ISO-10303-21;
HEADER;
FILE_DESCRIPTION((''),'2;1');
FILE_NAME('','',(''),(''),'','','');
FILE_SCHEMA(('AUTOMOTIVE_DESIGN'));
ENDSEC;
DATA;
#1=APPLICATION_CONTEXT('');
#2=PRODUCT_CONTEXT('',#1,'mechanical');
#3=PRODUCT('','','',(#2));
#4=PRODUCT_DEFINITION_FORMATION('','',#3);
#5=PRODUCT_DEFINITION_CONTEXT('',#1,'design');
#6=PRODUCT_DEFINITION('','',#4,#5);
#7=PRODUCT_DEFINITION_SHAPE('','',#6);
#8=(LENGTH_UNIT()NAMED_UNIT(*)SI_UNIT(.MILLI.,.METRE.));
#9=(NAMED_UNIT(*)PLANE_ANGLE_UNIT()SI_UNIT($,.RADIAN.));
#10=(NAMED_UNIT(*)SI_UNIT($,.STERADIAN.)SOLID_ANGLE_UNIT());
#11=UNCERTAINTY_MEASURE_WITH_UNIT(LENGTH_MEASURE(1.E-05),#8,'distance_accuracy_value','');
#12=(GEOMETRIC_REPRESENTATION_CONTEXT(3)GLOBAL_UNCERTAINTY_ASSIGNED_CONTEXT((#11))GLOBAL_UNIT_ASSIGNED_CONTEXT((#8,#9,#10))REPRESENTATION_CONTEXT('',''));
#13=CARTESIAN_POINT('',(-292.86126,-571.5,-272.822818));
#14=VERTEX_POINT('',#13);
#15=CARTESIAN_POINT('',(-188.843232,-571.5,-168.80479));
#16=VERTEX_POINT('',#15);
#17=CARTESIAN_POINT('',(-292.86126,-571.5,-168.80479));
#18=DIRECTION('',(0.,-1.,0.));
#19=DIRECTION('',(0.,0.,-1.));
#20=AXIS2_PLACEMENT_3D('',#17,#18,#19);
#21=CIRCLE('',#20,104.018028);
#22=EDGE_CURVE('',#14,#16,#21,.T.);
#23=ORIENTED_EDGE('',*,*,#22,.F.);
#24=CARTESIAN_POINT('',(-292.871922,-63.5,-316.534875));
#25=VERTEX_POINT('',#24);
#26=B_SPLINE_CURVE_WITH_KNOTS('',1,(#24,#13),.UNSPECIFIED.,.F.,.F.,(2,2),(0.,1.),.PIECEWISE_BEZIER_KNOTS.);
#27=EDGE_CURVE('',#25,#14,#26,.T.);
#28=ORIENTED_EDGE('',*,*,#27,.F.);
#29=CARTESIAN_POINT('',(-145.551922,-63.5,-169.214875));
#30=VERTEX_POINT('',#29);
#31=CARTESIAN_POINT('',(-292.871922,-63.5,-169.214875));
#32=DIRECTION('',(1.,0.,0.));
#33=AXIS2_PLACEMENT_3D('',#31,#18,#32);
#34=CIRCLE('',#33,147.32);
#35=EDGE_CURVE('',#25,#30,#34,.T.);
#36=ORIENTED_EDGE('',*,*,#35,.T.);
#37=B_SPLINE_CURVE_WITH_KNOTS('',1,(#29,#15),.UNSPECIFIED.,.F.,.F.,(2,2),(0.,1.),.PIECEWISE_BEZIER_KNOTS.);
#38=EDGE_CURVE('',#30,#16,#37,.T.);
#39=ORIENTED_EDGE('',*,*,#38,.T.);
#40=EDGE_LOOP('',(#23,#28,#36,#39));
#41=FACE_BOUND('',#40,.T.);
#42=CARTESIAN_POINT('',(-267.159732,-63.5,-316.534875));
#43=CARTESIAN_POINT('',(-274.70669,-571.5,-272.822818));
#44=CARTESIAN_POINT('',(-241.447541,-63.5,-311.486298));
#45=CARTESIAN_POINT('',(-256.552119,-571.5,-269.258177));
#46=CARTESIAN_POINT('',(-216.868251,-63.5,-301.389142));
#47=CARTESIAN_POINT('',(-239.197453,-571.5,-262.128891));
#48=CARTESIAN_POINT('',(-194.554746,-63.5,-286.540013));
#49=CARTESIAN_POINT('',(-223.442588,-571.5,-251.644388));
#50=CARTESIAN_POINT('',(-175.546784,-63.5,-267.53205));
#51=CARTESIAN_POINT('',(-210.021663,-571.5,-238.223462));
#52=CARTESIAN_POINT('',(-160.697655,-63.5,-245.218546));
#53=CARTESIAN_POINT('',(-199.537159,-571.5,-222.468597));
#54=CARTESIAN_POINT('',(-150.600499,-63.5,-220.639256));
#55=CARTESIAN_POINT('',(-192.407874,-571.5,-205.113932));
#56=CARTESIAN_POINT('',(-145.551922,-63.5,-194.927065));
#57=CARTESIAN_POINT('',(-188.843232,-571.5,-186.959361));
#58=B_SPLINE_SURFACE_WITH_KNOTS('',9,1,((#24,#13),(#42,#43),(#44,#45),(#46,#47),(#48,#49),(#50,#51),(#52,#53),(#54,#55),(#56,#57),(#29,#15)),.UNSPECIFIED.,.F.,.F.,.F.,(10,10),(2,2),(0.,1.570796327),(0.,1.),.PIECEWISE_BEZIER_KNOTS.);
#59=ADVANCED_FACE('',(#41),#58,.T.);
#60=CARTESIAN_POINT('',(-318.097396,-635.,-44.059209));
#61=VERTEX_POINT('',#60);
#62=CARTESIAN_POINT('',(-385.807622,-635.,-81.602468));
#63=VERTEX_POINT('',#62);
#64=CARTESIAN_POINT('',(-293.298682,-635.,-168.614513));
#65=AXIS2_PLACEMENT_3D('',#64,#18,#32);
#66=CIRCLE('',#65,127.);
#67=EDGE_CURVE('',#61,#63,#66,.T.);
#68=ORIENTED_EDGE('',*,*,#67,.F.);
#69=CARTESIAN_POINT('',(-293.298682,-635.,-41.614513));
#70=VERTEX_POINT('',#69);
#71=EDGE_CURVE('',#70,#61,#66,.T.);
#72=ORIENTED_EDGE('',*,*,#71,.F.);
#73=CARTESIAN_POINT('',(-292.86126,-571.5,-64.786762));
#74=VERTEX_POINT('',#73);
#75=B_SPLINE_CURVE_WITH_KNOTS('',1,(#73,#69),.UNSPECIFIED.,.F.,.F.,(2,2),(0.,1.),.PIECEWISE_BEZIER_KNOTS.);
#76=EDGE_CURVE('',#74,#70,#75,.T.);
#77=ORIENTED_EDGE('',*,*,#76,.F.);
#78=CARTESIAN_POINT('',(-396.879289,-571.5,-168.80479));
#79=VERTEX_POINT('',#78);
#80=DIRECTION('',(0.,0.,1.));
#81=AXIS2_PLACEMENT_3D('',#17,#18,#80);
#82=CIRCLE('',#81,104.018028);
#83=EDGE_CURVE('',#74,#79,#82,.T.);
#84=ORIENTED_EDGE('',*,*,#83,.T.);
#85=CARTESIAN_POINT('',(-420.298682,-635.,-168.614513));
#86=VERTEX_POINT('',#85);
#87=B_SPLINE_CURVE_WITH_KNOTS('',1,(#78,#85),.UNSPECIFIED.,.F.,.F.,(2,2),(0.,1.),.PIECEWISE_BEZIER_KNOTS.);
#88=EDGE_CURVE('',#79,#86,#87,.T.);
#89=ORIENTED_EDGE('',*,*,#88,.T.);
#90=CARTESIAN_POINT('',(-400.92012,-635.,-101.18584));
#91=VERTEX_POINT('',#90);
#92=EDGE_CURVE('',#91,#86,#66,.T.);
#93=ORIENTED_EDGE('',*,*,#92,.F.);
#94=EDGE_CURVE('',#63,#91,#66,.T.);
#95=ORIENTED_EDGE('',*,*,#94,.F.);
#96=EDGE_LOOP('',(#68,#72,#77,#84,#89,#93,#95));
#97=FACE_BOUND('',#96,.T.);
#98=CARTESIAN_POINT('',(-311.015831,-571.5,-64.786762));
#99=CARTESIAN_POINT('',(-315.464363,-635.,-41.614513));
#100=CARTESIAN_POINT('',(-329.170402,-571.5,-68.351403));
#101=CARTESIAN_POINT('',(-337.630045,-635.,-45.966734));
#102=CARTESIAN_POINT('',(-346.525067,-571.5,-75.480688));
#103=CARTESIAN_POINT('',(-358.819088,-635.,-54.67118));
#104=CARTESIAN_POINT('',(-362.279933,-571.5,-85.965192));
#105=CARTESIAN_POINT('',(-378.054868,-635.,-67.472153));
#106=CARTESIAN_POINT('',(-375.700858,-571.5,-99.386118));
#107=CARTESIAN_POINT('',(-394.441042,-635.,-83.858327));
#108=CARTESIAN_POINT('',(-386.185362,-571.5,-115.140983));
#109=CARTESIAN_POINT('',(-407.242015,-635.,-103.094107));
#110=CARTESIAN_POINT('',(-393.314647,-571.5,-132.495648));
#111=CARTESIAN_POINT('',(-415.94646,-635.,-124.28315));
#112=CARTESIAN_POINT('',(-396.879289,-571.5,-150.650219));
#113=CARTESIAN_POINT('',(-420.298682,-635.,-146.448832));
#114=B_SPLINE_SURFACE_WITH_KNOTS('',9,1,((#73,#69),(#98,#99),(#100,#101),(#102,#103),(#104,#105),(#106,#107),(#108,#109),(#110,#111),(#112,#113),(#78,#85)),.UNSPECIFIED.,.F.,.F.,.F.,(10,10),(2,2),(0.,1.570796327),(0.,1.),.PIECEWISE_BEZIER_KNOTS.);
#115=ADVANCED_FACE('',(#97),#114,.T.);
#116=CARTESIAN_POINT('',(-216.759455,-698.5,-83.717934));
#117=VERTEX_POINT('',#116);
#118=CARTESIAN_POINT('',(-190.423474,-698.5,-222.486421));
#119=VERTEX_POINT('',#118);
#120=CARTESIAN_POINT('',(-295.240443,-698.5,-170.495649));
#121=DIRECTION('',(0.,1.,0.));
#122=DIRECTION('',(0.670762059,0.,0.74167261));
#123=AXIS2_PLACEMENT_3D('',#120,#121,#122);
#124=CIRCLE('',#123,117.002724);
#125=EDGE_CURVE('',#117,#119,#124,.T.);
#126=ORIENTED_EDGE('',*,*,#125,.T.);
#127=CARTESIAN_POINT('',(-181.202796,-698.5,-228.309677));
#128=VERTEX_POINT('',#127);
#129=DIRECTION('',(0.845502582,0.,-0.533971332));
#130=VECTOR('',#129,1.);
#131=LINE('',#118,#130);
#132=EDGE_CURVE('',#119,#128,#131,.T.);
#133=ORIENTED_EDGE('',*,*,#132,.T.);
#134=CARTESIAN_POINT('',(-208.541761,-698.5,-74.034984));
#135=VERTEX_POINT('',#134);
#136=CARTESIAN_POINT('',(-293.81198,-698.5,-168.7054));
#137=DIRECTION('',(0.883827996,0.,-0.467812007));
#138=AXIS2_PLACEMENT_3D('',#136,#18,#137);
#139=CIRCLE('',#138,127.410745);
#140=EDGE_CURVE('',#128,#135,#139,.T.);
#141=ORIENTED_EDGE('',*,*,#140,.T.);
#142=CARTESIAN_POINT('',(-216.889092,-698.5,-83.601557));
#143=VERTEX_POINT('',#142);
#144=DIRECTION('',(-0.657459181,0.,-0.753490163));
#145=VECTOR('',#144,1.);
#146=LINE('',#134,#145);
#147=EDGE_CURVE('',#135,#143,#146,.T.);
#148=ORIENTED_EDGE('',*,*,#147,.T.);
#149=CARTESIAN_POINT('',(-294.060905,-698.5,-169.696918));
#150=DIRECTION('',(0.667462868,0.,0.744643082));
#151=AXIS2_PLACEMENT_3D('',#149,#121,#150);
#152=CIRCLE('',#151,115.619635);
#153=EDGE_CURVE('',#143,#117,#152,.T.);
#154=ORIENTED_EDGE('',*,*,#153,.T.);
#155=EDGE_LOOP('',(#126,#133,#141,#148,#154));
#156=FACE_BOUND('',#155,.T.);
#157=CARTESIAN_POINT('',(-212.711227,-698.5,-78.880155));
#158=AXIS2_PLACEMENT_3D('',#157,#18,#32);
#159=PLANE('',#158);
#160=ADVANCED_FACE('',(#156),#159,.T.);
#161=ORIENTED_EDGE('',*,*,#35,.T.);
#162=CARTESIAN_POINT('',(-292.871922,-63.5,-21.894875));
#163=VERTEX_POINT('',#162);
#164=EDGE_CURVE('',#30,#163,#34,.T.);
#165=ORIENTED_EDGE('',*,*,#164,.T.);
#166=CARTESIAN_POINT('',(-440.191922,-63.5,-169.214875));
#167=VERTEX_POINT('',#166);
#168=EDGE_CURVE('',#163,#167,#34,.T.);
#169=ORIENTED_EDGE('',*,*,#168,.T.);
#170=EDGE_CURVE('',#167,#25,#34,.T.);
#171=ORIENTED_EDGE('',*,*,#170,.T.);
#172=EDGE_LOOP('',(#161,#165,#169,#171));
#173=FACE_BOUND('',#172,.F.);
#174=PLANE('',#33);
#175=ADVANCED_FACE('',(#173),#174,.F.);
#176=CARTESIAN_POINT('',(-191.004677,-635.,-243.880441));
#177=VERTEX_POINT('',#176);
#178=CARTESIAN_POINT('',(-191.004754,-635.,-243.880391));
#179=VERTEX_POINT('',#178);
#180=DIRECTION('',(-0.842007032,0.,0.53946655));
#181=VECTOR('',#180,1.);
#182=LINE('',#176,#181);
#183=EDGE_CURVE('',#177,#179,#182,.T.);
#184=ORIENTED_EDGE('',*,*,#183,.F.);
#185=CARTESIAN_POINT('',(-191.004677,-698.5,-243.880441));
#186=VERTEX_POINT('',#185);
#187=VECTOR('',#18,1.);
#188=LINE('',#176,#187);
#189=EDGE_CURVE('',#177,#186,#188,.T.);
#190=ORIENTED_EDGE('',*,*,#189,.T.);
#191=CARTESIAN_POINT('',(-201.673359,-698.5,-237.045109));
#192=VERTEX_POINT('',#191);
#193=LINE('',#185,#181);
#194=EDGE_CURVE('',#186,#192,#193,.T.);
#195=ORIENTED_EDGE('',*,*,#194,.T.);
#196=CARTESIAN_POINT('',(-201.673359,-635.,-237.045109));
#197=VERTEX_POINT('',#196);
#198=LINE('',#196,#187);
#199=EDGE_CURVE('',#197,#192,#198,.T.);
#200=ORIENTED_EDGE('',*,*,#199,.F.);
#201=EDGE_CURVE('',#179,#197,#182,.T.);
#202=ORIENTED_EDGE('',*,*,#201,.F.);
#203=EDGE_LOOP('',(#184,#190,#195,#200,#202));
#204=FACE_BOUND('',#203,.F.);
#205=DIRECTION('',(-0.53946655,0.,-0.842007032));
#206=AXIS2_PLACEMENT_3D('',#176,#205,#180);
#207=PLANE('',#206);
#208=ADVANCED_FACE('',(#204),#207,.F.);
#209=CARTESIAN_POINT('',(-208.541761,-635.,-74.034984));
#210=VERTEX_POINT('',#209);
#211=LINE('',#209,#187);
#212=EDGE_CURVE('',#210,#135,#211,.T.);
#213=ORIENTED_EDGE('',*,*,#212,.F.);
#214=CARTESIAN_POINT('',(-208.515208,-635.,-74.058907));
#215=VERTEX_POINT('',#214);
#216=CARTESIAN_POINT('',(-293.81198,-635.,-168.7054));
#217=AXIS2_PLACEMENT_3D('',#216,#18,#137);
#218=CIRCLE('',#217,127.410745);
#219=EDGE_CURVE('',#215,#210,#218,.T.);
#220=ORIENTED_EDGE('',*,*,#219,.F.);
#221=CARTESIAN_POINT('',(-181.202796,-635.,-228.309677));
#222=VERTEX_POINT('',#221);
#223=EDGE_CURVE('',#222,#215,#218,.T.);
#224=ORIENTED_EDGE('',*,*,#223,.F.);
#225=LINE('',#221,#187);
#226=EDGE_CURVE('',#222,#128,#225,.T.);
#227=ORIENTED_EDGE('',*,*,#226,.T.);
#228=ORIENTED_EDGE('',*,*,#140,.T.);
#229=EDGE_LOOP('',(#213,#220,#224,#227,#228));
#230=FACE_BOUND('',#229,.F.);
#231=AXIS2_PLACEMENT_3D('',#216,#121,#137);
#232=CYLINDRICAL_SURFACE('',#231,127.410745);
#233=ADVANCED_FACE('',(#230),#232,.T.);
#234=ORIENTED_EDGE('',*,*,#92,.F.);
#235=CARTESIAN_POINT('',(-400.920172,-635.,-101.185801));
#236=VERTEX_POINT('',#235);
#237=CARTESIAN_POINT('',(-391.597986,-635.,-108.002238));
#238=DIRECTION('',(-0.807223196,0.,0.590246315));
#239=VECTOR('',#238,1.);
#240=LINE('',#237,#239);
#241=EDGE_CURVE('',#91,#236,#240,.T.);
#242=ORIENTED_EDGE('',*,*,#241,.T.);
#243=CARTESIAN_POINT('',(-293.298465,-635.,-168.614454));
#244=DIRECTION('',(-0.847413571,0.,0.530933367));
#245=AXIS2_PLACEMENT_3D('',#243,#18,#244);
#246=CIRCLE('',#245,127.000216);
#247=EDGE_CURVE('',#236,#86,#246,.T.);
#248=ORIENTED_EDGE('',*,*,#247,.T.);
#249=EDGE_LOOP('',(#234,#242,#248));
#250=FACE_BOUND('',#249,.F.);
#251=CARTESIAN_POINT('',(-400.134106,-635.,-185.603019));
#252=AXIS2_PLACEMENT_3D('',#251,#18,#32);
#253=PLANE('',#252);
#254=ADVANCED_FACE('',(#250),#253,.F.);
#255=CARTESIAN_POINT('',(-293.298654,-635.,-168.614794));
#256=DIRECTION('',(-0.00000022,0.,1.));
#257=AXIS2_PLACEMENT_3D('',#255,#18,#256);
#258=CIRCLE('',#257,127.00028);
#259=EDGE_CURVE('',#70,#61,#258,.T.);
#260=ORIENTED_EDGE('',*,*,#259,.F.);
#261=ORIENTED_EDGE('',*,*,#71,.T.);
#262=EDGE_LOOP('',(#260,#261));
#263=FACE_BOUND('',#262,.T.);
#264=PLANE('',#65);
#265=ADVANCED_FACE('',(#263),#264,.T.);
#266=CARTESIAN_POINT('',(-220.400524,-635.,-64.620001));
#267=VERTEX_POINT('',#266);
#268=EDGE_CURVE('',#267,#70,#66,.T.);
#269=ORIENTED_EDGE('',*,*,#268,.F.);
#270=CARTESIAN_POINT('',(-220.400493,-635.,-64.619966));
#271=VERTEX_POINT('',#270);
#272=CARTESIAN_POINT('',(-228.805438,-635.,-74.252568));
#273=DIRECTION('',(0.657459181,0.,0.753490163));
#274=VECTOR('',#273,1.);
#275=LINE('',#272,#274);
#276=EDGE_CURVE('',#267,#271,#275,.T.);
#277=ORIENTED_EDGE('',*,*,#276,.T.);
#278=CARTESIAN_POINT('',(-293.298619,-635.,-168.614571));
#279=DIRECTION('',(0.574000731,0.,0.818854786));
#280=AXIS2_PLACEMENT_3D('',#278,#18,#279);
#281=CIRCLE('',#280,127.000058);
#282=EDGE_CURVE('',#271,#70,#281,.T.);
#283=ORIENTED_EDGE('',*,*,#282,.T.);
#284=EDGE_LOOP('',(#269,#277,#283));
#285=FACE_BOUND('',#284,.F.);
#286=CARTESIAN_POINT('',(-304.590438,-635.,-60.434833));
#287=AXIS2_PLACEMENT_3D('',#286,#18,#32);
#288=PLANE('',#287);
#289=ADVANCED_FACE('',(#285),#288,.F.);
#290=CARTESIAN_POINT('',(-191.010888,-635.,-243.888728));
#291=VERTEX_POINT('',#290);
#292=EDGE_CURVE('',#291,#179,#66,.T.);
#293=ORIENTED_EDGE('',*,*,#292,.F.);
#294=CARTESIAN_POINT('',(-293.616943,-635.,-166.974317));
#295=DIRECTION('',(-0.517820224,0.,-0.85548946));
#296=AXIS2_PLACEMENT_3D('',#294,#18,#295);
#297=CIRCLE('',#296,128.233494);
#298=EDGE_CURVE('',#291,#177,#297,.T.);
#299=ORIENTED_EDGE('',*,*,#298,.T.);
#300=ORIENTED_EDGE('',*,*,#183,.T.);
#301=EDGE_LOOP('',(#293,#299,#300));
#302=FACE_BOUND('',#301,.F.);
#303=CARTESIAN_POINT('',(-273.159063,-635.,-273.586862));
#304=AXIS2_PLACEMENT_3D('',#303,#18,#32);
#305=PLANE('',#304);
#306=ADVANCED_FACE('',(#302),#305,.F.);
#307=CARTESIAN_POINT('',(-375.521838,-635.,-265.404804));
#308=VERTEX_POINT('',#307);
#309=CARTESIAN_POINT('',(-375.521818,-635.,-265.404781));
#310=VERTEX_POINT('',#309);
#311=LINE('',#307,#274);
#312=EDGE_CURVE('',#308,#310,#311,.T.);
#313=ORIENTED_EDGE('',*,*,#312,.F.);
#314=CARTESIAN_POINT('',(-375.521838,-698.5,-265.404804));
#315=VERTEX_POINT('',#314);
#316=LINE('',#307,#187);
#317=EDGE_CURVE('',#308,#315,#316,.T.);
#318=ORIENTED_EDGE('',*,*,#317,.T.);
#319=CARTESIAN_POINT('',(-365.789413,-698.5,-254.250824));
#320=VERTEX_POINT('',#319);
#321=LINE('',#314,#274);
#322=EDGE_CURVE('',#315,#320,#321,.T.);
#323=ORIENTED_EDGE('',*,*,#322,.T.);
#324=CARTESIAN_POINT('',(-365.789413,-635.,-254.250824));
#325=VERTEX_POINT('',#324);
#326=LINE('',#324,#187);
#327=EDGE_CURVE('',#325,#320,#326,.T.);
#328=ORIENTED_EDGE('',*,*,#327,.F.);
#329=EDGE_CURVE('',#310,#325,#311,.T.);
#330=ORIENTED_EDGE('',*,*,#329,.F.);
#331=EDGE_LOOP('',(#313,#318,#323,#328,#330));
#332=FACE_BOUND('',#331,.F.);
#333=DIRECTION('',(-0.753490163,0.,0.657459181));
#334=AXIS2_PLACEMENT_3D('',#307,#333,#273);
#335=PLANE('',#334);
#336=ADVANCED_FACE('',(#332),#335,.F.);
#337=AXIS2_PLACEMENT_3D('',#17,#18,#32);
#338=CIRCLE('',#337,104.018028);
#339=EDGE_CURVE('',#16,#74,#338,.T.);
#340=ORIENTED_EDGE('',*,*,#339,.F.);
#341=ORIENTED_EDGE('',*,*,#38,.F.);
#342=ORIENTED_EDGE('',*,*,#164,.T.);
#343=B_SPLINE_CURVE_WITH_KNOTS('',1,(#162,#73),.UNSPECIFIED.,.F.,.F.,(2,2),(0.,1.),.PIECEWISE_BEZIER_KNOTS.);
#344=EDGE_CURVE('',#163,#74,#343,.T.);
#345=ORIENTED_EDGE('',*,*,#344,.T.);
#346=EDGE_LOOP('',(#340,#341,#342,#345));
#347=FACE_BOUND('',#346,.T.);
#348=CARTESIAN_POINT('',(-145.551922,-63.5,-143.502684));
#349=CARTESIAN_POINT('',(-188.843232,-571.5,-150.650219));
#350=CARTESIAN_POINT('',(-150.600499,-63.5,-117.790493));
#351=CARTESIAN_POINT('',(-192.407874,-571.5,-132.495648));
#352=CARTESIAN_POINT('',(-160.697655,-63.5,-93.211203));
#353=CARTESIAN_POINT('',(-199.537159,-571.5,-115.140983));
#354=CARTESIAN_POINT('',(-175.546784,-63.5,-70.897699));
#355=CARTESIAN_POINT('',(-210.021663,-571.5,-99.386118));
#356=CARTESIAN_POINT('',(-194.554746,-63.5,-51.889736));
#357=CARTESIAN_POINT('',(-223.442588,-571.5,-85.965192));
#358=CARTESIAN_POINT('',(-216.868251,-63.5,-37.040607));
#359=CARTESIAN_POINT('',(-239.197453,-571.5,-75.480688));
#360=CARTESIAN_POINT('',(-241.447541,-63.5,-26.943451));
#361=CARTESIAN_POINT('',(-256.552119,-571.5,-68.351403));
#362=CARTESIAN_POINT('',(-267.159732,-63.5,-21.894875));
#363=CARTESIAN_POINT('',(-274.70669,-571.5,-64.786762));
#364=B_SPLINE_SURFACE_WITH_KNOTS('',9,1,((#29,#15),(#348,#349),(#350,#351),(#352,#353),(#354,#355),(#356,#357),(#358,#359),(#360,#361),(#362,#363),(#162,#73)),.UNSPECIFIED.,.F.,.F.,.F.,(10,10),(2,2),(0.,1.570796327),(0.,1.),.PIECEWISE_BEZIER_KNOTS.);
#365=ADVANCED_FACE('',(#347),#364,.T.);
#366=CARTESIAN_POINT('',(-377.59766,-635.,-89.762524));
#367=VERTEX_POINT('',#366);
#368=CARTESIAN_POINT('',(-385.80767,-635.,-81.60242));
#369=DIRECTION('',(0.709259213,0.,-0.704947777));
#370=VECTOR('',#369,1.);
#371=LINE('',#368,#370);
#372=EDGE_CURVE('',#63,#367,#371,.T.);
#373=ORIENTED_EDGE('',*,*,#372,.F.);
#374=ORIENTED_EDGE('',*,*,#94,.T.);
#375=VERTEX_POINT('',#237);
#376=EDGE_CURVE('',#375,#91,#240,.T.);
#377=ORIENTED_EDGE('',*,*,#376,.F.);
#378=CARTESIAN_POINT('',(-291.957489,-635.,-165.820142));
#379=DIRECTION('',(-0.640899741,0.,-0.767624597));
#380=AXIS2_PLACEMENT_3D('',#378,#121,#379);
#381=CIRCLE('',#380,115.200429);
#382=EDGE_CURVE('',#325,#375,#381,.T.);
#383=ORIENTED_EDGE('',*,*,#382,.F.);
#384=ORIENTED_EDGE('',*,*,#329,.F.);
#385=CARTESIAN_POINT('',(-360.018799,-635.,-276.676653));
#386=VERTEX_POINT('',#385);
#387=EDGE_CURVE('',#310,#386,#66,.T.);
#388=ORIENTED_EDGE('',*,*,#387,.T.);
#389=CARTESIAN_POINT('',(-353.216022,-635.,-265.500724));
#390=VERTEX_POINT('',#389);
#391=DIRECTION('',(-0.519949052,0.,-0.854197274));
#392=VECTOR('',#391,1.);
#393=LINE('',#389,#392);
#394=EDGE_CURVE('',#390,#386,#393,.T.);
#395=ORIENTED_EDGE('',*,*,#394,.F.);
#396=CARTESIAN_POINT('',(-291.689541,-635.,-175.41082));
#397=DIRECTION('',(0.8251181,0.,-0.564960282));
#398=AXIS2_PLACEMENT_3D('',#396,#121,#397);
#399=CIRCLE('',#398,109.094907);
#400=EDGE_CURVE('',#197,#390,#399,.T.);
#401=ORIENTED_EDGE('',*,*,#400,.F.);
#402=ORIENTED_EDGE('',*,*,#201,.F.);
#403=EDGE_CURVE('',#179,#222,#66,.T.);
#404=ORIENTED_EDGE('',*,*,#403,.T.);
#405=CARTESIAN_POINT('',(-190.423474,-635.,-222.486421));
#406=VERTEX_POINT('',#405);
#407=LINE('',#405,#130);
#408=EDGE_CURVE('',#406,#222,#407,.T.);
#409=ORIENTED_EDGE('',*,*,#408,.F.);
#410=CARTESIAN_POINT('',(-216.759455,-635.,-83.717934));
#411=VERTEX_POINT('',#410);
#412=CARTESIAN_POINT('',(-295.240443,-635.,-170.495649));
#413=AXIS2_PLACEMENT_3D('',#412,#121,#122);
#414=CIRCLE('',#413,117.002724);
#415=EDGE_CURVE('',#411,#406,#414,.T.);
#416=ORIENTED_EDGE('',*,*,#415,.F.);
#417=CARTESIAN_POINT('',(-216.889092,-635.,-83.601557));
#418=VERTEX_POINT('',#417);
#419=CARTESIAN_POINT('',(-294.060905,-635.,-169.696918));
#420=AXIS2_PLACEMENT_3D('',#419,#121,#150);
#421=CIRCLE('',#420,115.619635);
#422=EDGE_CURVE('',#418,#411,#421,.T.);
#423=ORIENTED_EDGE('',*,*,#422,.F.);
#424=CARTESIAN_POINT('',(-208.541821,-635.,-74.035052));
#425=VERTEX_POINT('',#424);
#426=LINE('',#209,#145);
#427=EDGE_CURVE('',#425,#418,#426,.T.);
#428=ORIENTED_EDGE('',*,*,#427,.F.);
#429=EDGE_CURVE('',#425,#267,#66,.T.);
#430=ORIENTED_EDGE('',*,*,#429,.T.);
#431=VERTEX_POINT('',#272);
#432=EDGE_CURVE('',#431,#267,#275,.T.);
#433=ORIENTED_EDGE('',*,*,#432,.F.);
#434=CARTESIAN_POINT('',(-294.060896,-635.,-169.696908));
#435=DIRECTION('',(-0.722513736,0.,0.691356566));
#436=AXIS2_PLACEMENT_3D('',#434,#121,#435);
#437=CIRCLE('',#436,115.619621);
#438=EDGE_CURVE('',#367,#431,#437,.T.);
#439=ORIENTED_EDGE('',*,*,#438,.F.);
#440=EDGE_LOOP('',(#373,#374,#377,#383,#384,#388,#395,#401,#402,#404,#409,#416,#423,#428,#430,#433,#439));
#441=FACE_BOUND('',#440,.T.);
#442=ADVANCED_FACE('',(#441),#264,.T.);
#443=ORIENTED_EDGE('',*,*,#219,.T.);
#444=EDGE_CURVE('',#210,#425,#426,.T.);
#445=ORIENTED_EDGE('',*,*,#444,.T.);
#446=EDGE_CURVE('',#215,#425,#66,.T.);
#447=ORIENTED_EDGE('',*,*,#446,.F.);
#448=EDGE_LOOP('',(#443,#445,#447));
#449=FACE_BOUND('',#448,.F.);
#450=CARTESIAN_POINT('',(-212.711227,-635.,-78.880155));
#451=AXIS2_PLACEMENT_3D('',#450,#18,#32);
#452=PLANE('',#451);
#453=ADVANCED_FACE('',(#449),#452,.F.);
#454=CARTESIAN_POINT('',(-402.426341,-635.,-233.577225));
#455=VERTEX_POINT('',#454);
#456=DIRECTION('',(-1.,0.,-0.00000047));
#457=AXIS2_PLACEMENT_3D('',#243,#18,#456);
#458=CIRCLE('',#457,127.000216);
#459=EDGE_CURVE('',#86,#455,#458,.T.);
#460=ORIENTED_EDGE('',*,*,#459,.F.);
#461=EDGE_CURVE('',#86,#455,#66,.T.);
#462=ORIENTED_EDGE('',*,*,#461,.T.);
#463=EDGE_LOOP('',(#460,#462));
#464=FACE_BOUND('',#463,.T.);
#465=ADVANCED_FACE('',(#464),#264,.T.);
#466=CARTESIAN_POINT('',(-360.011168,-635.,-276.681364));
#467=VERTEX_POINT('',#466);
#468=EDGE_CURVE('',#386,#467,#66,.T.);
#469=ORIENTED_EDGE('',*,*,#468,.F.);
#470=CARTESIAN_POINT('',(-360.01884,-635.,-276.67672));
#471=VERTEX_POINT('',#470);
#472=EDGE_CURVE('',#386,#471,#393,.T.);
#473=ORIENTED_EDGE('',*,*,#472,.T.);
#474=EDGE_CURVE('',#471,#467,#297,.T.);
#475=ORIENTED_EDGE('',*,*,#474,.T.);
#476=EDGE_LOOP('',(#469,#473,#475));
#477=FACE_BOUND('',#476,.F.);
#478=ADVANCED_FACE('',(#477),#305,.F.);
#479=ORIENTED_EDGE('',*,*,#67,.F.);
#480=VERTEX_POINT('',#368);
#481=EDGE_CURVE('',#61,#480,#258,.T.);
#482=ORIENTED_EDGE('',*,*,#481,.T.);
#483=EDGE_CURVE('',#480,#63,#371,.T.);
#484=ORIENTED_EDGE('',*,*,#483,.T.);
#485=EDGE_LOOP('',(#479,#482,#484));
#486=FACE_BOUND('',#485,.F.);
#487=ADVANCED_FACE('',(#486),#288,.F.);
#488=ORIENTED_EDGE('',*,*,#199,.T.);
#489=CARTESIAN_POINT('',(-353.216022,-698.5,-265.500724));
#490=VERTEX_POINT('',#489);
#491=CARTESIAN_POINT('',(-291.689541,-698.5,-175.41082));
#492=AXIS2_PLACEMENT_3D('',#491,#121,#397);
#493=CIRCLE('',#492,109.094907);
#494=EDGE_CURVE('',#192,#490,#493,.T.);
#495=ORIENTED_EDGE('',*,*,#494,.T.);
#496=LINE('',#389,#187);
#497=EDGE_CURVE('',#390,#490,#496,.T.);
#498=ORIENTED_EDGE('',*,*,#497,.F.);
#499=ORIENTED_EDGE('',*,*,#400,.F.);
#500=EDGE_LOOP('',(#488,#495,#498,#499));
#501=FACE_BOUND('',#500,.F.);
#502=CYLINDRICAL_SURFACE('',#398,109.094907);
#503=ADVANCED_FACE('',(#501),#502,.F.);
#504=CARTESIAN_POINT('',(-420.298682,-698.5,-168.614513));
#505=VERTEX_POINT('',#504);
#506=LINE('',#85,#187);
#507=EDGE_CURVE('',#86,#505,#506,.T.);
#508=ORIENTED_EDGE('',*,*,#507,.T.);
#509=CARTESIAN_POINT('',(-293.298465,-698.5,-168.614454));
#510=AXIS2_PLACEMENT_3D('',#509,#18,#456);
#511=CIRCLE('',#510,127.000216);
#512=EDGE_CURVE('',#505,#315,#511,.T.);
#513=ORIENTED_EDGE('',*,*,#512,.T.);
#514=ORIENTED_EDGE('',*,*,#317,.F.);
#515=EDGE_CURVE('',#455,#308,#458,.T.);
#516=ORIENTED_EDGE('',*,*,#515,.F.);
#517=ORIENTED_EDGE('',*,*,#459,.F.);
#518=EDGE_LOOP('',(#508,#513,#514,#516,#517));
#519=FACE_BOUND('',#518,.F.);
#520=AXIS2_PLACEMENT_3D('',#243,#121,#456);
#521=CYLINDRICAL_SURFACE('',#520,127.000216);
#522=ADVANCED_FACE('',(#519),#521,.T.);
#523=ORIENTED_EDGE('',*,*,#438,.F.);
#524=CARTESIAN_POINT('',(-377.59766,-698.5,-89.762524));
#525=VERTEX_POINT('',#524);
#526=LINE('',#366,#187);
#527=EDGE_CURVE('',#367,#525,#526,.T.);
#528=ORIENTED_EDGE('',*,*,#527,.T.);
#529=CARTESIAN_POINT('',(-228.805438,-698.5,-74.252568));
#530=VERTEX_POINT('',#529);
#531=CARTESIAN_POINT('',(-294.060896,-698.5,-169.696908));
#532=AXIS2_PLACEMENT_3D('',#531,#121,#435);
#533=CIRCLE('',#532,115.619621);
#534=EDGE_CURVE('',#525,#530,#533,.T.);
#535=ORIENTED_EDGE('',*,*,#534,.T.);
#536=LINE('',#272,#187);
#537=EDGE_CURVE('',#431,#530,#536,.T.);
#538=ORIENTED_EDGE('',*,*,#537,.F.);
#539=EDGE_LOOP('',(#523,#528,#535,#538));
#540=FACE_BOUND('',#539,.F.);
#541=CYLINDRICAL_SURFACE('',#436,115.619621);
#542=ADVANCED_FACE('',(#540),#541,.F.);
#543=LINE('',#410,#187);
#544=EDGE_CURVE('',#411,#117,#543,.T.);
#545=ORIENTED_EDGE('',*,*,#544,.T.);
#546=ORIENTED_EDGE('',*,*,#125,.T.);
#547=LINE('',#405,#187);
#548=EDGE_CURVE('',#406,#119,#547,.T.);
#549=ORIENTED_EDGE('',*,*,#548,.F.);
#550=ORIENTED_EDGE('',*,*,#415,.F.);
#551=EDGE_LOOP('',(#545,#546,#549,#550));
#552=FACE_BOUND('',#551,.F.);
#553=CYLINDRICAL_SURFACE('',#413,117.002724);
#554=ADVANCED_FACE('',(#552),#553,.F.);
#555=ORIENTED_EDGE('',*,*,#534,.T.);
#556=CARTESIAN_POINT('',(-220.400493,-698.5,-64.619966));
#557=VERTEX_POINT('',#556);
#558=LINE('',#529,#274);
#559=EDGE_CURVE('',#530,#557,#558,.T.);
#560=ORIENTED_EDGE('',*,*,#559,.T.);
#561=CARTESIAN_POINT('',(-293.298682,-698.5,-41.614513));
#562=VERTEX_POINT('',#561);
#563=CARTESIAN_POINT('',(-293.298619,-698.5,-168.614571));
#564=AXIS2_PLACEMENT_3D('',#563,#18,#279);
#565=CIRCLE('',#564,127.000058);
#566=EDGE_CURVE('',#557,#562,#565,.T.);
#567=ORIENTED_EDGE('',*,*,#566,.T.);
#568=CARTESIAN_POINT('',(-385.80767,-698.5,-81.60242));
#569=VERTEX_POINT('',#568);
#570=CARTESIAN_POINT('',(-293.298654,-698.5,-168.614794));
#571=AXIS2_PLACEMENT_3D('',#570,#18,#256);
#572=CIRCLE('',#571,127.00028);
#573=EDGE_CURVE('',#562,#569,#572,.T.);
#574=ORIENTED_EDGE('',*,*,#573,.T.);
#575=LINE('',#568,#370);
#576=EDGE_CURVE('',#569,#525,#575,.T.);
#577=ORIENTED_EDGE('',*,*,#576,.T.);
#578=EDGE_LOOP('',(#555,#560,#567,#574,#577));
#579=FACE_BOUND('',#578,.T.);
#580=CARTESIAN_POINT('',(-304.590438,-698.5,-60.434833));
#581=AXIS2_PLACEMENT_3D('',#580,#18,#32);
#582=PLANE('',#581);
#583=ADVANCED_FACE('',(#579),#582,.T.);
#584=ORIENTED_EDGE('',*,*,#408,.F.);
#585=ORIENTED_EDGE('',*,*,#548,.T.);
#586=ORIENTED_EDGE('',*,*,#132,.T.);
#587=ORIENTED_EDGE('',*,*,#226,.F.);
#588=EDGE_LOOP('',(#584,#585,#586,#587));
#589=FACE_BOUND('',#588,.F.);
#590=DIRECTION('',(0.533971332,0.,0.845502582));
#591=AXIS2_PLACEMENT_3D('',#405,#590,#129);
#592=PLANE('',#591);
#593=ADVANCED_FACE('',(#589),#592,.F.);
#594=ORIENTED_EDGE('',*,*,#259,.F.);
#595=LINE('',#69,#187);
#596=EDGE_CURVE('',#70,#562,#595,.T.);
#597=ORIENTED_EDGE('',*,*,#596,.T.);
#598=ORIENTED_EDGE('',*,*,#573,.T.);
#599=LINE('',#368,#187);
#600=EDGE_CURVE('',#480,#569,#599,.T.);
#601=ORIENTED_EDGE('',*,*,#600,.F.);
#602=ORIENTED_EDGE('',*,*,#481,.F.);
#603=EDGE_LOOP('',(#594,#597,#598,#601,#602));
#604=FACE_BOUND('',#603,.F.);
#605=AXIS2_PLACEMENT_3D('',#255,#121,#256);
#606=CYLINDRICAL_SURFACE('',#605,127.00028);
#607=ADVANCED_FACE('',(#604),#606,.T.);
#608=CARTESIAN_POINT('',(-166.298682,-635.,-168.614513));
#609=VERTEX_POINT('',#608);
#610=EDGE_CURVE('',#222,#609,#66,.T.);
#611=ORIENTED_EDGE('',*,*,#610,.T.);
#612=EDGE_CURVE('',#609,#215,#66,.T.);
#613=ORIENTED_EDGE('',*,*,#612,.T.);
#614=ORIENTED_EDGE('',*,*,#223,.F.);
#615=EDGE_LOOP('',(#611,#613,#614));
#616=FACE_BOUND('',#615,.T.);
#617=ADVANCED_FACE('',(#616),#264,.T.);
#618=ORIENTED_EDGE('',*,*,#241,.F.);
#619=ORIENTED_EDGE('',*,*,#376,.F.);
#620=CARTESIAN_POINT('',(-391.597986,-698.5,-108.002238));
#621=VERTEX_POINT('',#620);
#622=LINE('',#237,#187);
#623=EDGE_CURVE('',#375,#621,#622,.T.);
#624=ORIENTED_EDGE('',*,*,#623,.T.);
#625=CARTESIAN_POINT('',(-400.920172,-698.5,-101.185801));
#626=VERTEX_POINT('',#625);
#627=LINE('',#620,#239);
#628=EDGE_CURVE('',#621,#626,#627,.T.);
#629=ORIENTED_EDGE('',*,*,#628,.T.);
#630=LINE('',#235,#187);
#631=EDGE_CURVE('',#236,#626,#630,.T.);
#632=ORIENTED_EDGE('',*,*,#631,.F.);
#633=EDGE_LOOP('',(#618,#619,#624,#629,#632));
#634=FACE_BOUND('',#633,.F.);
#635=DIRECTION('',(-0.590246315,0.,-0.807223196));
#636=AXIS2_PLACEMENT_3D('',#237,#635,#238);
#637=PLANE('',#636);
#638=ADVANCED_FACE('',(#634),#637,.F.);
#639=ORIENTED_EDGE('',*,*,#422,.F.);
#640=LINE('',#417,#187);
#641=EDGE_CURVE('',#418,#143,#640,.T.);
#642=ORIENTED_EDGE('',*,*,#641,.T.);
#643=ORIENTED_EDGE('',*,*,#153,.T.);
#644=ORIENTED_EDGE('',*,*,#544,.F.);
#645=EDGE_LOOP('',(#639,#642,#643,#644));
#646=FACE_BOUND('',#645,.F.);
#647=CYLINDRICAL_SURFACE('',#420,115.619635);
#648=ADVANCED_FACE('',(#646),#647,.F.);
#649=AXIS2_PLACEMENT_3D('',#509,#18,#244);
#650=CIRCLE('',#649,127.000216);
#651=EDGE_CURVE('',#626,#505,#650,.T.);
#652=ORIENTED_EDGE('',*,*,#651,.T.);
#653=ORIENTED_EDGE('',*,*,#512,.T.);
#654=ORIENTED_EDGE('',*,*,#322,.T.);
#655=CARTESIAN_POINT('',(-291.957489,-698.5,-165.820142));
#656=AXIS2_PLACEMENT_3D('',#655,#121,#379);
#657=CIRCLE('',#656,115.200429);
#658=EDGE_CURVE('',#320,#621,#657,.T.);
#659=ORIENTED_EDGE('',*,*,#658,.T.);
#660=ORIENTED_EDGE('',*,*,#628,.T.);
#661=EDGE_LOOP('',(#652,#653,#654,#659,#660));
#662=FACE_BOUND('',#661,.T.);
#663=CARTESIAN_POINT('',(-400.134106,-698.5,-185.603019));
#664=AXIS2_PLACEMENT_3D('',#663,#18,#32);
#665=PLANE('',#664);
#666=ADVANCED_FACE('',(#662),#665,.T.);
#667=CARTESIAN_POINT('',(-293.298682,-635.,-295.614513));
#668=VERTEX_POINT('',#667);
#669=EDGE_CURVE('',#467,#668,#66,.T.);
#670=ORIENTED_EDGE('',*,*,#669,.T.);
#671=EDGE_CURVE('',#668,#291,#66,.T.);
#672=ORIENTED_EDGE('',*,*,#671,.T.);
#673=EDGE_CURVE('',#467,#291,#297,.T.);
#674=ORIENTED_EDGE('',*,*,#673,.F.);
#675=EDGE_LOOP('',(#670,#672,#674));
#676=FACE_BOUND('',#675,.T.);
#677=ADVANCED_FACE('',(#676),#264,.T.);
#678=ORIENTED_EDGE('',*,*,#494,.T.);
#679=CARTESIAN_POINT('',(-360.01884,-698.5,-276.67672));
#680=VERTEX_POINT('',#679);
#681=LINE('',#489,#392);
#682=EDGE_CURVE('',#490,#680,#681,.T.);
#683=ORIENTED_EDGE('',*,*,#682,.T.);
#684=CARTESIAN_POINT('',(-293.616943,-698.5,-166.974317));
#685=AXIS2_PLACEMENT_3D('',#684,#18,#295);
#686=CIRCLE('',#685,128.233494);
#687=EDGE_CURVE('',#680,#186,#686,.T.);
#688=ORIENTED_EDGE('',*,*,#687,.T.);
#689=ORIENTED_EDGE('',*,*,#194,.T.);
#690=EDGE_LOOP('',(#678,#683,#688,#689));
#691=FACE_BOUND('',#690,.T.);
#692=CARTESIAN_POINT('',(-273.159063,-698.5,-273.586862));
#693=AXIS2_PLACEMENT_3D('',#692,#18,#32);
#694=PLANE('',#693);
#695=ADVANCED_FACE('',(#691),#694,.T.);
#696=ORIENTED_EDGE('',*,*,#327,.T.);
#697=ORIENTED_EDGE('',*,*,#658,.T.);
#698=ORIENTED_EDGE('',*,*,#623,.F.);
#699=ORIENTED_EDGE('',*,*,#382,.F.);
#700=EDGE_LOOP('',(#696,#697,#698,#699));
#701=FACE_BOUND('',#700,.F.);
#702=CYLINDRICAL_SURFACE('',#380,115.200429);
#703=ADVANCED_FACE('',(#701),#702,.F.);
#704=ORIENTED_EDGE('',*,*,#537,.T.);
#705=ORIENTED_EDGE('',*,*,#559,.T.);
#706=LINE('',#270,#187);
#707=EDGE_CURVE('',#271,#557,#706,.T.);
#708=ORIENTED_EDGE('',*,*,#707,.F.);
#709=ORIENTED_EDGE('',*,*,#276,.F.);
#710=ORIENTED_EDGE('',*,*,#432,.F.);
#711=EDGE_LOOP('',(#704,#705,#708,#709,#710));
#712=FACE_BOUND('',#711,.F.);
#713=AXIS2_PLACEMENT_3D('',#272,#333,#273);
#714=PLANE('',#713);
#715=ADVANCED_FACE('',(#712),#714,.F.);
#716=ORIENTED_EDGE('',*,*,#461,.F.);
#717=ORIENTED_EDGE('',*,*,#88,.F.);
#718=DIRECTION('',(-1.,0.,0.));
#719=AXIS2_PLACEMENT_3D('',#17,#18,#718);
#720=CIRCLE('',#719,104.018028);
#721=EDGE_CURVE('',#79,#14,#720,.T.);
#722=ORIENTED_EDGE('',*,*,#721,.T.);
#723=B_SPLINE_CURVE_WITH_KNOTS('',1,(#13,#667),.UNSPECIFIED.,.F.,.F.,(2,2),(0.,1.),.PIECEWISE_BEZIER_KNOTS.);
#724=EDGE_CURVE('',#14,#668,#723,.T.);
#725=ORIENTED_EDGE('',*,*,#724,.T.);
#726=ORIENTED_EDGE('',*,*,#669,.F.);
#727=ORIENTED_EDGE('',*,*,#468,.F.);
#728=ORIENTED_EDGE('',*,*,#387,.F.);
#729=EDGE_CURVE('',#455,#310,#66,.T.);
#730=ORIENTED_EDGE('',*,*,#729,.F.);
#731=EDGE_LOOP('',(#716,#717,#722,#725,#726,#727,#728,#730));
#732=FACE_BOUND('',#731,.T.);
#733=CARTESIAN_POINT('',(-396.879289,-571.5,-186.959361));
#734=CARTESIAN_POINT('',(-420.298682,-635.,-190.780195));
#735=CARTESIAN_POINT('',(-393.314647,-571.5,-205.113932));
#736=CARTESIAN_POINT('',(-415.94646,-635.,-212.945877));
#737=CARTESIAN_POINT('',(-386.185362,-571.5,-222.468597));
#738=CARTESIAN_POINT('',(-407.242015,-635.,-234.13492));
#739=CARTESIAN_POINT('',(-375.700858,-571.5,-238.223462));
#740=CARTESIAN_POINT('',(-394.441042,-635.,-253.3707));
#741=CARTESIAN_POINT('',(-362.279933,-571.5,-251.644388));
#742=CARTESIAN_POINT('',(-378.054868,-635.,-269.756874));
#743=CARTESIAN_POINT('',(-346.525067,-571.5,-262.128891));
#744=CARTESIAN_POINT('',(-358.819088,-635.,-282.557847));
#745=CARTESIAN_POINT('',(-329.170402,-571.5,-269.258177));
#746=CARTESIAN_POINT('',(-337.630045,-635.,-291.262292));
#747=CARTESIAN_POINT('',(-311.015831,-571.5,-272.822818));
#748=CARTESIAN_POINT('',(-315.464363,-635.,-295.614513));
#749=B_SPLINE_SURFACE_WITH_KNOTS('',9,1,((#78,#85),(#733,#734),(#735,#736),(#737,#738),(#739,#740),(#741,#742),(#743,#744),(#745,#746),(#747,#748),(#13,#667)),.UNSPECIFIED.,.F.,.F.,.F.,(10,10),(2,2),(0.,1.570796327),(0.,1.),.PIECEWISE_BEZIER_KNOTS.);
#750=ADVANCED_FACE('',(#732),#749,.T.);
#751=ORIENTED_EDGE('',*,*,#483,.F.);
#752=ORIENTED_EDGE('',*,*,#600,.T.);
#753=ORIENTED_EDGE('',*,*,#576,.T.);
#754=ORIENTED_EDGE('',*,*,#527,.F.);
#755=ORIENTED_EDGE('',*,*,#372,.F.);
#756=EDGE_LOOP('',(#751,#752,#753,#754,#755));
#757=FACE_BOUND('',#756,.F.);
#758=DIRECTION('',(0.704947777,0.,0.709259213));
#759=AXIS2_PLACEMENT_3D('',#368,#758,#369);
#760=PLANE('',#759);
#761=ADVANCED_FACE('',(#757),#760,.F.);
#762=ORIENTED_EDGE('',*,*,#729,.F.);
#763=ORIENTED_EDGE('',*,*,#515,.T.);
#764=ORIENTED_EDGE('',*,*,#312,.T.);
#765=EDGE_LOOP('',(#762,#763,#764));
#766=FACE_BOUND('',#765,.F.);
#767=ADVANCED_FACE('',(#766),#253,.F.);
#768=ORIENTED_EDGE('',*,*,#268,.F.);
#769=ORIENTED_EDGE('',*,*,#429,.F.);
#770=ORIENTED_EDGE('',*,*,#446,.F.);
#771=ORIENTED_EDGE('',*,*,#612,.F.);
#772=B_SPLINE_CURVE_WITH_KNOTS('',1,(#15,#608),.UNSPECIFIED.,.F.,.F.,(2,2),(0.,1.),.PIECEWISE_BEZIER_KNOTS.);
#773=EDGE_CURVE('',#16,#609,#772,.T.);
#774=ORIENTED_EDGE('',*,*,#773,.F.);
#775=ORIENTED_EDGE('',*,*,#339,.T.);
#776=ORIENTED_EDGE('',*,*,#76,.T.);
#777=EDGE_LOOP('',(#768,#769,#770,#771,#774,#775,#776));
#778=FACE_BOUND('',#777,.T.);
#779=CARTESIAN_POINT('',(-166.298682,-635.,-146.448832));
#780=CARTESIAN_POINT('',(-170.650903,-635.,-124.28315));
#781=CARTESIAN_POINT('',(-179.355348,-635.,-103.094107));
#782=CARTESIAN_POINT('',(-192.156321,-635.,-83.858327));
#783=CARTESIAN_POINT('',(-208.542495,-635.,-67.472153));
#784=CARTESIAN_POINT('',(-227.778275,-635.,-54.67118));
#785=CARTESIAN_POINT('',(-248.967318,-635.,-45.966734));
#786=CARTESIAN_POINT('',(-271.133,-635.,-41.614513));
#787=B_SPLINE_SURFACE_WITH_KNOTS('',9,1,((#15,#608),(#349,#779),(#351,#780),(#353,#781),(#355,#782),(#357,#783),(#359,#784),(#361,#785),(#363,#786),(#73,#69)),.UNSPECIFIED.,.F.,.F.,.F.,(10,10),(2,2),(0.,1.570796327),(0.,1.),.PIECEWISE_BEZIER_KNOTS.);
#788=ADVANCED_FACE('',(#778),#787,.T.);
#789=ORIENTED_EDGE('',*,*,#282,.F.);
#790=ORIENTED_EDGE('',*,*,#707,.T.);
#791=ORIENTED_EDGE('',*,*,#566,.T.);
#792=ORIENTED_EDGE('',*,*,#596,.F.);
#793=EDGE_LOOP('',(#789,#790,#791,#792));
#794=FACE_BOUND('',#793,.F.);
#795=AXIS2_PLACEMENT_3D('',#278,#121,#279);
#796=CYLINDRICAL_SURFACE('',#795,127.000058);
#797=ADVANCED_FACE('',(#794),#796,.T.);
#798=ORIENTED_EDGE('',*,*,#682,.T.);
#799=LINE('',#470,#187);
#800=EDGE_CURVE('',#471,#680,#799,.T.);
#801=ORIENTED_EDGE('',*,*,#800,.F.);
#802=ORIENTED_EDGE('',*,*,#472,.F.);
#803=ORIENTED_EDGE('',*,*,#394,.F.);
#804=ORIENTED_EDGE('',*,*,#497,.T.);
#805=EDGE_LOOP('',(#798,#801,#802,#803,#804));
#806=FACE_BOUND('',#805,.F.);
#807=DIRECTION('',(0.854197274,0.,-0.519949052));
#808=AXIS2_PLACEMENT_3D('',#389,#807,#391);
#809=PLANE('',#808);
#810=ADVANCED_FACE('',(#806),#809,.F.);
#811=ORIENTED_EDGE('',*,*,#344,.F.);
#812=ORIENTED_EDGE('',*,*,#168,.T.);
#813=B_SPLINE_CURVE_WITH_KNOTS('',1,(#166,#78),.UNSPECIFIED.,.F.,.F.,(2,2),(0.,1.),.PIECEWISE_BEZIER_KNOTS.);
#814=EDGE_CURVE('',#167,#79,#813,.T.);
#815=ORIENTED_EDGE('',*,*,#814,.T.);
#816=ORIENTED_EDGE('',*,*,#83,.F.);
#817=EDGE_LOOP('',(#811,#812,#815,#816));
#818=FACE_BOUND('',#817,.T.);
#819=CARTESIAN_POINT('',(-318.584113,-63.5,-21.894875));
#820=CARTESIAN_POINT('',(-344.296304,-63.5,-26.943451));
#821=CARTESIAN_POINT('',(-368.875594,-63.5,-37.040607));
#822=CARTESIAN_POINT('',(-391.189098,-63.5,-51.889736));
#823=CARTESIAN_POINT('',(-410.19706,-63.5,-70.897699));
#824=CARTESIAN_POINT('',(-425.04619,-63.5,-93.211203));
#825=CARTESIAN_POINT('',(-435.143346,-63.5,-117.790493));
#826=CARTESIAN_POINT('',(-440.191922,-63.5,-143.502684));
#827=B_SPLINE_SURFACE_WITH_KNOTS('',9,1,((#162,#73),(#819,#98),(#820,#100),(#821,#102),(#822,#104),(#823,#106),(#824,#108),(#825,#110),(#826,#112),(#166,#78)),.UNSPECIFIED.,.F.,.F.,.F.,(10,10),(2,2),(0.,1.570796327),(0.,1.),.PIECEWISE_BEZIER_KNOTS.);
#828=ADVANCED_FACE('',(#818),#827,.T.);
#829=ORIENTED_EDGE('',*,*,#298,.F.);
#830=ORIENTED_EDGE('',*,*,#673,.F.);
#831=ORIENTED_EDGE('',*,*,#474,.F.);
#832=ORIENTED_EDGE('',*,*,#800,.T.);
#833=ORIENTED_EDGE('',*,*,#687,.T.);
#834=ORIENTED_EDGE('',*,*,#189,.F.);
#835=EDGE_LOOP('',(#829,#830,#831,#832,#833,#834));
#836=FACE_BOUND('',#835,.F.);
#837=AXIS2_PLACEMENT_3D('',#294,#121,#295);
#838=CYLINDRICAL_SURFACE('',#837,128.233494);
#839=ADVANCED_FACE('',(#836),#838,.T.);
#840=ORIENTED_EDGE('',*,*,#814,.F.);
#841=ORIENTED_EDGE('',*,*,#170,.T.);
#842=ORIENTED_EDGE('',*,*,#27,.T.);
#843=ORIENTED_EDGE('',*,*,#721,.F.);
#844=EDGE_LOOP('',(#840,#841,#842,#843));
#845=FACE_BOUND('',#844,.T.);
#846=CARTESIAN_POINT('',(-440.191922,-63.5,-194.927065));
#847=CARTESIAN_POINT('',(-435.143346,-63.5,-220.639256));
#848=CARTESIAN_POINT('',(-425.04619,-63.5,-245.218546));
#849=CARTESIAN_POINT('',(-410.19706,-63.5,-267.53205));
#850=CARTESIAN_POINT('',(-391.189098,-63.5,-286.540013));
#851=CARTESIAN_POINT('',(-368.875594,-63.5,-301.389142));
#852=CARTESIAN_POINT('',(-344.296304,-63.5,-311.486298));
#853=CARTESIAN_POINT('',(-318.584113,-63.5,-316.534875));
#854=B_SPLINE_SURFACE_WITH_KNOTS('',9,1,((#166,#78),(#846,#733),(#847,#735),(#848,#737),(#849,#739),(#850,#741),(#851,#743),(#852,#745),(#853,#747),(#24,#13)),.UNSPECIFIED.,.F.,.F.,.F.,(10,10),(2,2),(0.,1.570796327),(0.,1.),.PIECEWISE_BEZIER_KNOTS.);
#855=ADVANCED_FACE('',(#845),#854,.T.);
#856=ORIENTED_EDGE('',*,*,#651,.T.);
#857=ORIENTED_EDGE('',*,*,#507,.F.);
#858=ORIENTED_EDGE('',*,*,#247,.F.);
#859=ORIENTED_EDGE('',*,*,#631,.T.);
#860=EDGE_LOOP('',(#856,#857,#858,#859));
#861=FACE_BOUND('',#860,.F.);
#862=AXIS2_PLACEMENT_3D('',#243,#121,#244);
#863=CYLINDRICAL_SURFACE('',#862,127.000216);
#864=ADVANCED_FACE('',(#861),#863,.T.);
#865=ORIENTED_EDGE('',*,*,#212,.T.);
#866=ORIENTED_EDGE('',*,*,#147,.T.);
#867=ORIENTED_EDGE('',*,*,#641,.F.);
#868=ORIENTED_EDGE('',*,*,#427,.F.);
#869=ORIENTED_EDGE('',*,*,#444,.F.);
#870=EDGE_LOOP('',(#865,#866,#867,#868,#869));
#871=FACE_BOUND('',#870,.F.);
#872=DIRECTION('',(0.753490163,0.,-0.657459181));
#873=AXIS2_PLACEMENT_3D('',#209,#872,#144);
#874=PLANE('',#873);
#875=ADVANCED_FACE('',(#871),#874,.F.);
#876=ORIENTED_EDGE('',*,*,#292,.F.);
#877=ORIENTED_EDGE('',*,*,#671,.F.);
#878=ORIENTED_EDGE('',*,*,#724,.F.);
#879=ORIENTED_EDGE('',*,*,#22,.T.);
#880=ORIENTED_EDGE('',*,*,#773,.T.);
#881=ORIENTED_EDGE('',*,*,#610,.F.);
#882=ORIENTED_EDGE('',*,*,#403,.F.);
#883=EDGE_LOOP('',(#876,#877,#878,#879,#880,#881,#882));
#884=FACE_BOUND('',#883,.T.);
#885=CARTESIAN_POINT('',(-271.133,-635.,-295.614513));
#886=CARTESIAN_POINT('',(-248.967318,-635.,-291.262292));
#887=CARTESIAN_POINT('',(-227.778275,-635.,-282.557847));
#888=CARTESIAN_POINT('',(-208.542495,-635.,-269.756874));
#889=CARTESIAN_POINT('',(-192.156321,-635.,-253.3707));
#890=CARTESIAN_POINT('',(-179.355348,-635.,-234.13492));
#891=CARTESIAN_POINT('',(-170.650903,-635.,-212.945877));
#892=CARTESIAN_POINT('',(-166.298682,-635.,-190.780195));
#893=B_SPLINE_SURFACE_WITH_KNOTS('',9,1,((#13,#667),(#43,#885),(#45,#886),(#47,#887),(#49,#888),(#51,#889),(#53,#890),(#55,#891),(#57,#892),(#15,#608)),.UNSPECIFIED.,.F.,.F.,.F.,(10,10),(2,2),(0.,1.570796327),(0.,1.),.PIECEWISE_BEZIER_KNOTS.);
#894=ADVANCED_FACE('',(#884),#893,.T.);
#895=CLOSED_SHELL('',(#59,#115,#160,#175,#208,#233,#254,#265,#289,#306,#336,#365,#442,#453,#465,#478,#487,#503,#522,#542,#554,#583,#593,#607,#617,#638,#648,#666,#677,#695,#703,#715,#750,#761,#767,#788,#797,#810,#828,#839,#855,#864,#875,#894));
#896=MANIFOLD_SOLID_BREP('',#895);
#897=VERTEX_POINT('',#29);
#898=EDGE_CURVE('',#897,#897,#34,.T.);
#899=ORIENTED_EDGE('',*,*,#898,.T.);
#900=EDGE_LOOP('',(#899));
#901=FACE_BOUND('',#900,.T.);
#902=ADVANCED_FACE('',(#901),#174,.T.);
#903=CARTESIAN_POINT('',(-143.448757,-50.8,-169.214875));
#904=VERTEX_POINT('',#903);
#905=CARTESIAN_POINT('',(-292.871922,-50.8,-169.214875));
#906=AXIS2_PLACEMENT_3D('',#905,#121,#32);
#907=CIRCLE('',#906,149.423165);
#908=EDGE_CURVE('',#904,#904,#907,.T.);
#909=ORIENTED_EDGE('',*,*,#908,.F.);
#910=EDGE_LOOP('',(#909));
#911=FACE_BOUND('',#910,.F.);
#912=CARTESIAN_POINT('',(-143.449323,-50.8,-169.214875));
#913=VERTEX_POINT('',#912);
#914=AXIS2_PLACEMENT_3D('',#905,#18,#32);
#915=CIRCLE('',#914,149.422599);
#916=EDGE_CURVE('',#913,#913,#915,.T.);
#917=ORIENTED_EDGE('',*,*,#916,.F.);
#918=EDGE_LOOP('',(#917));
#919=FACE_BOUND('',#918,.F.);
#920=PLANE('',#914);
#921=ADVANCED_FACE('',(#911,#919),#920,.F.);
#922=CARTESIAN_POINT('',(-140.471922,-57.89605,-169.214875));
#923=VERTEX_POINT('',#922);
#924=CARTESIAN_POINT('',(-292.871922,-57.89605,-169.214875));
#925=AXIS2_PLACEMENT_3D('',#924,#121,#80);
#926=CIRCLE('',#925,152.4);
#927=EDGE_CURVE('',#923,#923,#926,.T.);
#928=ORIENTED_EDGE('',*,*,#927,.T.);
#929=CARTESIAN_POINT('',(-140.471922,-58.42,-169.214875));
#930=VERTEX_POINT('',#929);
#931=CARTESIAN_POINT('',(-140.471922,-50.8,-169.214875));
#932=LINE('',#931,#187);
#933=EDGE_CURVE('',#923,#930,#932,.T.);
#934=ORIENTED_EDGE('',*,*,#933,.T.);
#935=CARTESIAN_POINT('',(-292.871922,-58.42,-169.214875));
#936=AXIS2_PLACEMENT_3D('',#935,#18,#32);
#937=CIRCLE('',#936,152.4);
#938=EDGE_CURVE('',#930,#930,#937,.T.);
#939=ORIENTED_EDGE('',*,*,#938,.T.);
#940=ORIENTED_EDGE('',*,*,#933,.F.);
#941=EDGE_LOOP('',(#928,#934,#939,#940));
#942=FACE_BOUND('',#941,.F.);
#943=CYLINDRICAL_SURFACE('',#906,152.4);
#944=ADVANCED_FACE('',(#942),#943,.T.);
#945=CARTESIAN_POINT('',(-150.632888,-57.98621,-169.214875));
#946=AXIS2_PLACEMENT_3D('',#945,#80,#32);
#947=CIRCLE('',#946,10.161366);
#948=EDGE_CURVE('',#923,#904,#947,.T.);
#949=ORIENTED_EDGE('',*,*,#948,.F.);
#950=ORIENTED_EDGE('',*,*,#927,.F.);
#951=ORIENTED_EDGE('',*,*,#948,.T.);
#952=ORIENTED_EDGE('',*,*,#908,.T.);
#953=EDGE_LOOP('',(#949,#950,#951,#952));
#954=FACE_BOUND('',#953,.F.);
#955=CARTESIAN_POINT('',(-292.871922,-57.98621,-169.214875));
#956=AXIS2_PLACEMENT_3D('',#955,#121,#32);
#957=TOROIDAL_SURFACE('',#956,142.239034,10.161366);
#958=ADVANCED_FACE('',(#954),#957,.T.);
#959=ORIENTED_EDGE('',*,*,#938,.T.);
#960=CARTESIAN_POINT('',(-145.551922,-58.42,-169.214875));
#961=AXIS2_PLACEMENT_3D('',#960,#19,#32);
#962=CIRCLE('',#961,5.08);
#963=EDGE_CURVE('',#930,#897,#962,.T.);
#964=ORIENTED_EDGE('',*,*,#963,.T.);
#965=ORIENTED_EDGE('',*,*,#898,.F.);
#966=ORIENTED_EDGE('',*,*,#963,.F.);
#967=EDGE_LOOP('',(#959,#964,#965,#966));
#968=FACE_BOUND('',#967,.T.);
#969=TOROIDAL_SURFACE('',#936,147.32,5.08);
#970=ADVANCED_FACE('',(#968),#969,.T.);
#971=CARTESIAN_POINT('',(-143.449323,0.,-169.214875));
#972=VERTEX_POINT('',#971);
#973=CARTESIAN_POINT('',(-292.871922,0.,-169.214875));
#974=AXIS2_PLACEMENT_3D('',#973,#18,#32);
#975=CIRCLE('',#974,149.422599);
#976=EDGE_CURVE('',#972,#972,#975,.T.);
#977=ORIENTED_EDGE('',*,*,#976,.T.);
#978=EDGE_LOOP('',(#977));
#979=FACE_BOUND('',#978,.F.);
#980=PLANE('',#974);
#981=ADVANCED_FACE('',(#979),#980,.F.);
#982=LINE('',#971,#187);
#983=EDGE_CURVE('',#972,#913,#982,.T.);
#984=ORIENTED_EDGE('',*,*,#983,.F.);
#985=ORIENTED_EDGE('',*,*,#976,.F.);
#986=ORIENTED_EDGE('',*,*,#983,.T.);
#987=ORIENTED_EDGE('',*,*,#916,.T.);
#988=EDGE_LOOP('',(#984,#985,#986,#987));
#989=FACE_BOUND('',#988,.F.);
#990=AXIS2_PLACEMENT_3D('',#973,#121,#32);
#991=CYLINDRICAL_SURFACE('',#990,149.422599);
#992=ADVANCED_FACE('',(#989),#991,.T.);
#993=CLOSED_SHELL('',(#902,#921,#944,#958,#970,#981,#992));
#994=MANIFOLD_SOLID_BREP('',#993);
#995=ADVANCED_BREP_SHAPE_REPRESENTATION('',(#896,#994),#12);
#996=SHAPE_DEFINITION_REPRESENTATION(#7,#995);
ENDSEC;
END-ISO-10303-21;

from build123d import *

# Parameters (mm, degrees)
F0_R      = 149.4225994351
F1_DEPTH  = 50.8
F2_R      = 152.4
F2_R_2    = 149.4225994351
F3_DEPTH  = 12.7
F5_R      = 5.08
F3_FACE_R = 147.32
F10_R     = 127
F13_DEPTH = 63.5


# Not quite as in the source:
# - a fillet or chamfer that OpenCascade refuses, or shapes differently, is made with other operations: its cross-section is extruded or revolved along the edge and cut away or added
# - ends of sketch curves that miss each other by under 0.0002 mm in the source are joined


with BuildPart() as f1:
    # F0 (on Front) → F1 (new body)
    with BuildSketch(Plane.XZ):
        with Locations((-292.8719222546, -169.214874506)):
            Circle(F0_R)
    extrude(amount=F1_DEPTH)

    # F2 (on face) → F3 (join)
    with BuildSketch(Plane.XZ.offset(50.8)):
        with Locations((-292.8719222546, -169.214874506)):
            Circle(F2_R)
        with Locations((-292.8719222546, -169.214874506)):
            Circle(F2_R_2, mode=Mode.SUBTRACT)
        with Locations((-292.8719222546, -169.214874506)):
            Circle(F2_R_2)
    extrude(amount=F3_DEPTH)

    # F4: fillet of radius 10.16 on 1 edges, made by hand

    # F4_s1 → F4_t2 (revolve, cut)
    with BuildSketch(Plane.XY.offset(-169.214874506)):
        with BuildLine():
            ThreePointArc((-140.4715222546, -57.9862101152), (-141.2453680799, -54.0967598366), (-143.4490400288, -50.7997171052))
            Line((-143.4490400288, -50.7997171052), (-142.7306552377, -50.0810678042))
            ThreePointArc((-142.7306552377, -50.0810678042), (-141.9604811417, -49.7838634315), (-140.4719222546, -49.7838634315))
            Line((-140.4719222546, -49.7838634315), (-139.455785686, -50.8))
            ThreePointArc((-139.455785686, -50.8), (-139.455785686, -54.3931050576), (-139.455385686, -57.9862101152))
            Line((-139.455385686, -57.9862101152), (-140.4715222546, -57.9862101152))
        make_face()
    revolve(axis=Axis((-292.8719222546, -50.8, -169.214874506), (0, -1, 0)), mode=Mode.SUBTRACT)

    # F5
    f5_edges = [f1.edges().sort_by_distance(p)[0] for p in [
        (-445.271922, -63.5, -169.214875),
    ]]
    fillet(f5_edges, radius=F5_R)


with BuildPart() as f8:
    # F3_face (on face) → F8 section 0
    with BuildSketch(Plane(origin=(-292.8719222546, -63.5, -169.214874506), x_dir=(1, 0, 0), z_dir=(0, -1, 0))):
        Circle(F3_FACE_R)
    # F7 (on offset) → F8 section 1
    with BuildSketch(Plane.XZ.offset(571.5)):
        with BuildLine():
            ThreePointArc((-188.8432323815, -168.8047898933), (-219.3094074441, -95.2529368637), (-292.8612604737, -64.7867618011))
            ThreePointArc((-292.8612604737, -64.7867618011), (-366.4131135034, -95.2529368637), (-396.8792885659, -168.8047898933))
            ThreePointArc((-396.8792885659, -168.8047898933), (-366.4131135034, -242.356642923), (-292.8612604737, -272.8228179855))
            ThreePointArc((-292.8612604737, -272.8228179855), (-219.3094074441, -242.356642923), (-188.8432323815, -168.8047898933))
        make_face()
    loft()

    # F8_face (on face) → F11 section 0
    with BuildSketch(Plane(origin=(-292.8612604737, -571.5, -168.8047898933), x_dir=(1, 0, 0), z_dir=(0, -1, 0))):
        with BuildLine():
            ThreePointArc((104.0180280922, 0), (73.5518530297, 73.5518530297), (0, 104.0180280922))
            ThreePointArc((0, 104.0180280922), (-73.5518530297, 73.5518530297), (-104.0180280922, 0))
            ThreePointArc((-104.0180280922, 0), (-73.5518530297, -73.5518530297), (0, -104.0180280922))
            ThreePointArc((0, -104.0180280922), (73.5518530297, -73.5518530297), (104.0180280922, 0))
        make_face()
    # F10 (on offset) → F11 section 1
    with BuildSketch(Plane.XZ.offset(635)):
        with Locations((-293.2986815244, -168.6145133888)):
            Circle(F10_R)
    loft()

    # F12 (on face) → F13 (join)
    with BuildSketch(Plane.XZ.offset(635)):
        with BuildLine():
            Line((-391.5979862213, -108.0022379756), (-400.9201721133, -101.1858012074))
            ThreePointArc((-400.9201721133, -101.1858012074), (-415.3579569892, -133.5354651206), (-420.2986816338, -168.6145133888))
            ThreePointArc((-420.2986816338, -168.6145133888), (-408.5621527866, -221.9374064899), (-375.5218381286, -265.4048039891))
            Line((-375.5218381286, -265.4048039891), (-365.7894134521, -254.2508244514))
            ThreePointArc((-365.7894134521, -254.2508244514), (-405.4049768836, -185.8402857464), (-391.5979862213, -108.0022379756))
        make_face()
        with BuildLine():
            Line((-228.8054376841, -74.2525681853), (-220.400493443, -64.6199659103))
            ThreePointArc((-220.400493443, -64.6199659103), (-255.0776205161, -47.5023507464), (-293.2986815244, -41.6145133381))
            ThreePointArc((-293.2986815244, -41.6145133381), (-343.6895158778, -52.0393579803), (-385.8076700214, -81.6024204768))
            Line((-385.8076700214, -81.6024204768), (-377.5976598218, -89.7625237741))
            ThreePointArc((-377.5976598218, -89.7625237741), (-306.0480228678, -54.7003621275), (-228.8054376841, -74.2525681853))
        make_face()
        with BuildLine():
            ThreePointArc((-360.0188401366, -276.6767202506), (-269.1895671051, -292.8597111858), (-191.0046766799, -243.8804406295))
            Line((-191.0046766799, -243.8804406295), (-201.6733586788, -237.045109272))
            ThreePointArc((-201.6733586788, -237.045109272), (-271.5563278796, -282.6318647221), (-353.216022253, -265.5007243156))
            Line((-353.216022253, -265.5007243156), (-360.0188401366, -276.6767202506))
        make_face()
        with BuildLine():
            Line((-216.7594547282, -83.717933659), (-208.5417613742, -74.0349839049))
            Line((-208.5417613742, -74.0349839049), (-216.8890916963, -83.6015569533))
            ThreePointArc((-216.8890916963, -83.6015569533), (-216.8242512933, -83.6597208898), (-216.7594547282, -83.717933659))
        make_face()
        with BuildLine():
            ThreePointArc((-181.2027964678, -228.3096766694), (-168.3558734214, -146.4733672465), (-208.5417613742, -74.0349839049))
            Line((-208.5417613742, -74.0349839049), (-216.7594547282, -83.717933659))
            ThreePointArc((-216.7594547282, -83.717933659), (-180.2895464174, -148.679856079), (-190.4234737158, -222.4864214659))
            Line((-190.4234737158, -222.4864214659), (-181.2027964678, -228.3096766694))
        make_face()
    extrude(amount=F13_DEPTH)


solid = Compound([f1.part, f8.part])
